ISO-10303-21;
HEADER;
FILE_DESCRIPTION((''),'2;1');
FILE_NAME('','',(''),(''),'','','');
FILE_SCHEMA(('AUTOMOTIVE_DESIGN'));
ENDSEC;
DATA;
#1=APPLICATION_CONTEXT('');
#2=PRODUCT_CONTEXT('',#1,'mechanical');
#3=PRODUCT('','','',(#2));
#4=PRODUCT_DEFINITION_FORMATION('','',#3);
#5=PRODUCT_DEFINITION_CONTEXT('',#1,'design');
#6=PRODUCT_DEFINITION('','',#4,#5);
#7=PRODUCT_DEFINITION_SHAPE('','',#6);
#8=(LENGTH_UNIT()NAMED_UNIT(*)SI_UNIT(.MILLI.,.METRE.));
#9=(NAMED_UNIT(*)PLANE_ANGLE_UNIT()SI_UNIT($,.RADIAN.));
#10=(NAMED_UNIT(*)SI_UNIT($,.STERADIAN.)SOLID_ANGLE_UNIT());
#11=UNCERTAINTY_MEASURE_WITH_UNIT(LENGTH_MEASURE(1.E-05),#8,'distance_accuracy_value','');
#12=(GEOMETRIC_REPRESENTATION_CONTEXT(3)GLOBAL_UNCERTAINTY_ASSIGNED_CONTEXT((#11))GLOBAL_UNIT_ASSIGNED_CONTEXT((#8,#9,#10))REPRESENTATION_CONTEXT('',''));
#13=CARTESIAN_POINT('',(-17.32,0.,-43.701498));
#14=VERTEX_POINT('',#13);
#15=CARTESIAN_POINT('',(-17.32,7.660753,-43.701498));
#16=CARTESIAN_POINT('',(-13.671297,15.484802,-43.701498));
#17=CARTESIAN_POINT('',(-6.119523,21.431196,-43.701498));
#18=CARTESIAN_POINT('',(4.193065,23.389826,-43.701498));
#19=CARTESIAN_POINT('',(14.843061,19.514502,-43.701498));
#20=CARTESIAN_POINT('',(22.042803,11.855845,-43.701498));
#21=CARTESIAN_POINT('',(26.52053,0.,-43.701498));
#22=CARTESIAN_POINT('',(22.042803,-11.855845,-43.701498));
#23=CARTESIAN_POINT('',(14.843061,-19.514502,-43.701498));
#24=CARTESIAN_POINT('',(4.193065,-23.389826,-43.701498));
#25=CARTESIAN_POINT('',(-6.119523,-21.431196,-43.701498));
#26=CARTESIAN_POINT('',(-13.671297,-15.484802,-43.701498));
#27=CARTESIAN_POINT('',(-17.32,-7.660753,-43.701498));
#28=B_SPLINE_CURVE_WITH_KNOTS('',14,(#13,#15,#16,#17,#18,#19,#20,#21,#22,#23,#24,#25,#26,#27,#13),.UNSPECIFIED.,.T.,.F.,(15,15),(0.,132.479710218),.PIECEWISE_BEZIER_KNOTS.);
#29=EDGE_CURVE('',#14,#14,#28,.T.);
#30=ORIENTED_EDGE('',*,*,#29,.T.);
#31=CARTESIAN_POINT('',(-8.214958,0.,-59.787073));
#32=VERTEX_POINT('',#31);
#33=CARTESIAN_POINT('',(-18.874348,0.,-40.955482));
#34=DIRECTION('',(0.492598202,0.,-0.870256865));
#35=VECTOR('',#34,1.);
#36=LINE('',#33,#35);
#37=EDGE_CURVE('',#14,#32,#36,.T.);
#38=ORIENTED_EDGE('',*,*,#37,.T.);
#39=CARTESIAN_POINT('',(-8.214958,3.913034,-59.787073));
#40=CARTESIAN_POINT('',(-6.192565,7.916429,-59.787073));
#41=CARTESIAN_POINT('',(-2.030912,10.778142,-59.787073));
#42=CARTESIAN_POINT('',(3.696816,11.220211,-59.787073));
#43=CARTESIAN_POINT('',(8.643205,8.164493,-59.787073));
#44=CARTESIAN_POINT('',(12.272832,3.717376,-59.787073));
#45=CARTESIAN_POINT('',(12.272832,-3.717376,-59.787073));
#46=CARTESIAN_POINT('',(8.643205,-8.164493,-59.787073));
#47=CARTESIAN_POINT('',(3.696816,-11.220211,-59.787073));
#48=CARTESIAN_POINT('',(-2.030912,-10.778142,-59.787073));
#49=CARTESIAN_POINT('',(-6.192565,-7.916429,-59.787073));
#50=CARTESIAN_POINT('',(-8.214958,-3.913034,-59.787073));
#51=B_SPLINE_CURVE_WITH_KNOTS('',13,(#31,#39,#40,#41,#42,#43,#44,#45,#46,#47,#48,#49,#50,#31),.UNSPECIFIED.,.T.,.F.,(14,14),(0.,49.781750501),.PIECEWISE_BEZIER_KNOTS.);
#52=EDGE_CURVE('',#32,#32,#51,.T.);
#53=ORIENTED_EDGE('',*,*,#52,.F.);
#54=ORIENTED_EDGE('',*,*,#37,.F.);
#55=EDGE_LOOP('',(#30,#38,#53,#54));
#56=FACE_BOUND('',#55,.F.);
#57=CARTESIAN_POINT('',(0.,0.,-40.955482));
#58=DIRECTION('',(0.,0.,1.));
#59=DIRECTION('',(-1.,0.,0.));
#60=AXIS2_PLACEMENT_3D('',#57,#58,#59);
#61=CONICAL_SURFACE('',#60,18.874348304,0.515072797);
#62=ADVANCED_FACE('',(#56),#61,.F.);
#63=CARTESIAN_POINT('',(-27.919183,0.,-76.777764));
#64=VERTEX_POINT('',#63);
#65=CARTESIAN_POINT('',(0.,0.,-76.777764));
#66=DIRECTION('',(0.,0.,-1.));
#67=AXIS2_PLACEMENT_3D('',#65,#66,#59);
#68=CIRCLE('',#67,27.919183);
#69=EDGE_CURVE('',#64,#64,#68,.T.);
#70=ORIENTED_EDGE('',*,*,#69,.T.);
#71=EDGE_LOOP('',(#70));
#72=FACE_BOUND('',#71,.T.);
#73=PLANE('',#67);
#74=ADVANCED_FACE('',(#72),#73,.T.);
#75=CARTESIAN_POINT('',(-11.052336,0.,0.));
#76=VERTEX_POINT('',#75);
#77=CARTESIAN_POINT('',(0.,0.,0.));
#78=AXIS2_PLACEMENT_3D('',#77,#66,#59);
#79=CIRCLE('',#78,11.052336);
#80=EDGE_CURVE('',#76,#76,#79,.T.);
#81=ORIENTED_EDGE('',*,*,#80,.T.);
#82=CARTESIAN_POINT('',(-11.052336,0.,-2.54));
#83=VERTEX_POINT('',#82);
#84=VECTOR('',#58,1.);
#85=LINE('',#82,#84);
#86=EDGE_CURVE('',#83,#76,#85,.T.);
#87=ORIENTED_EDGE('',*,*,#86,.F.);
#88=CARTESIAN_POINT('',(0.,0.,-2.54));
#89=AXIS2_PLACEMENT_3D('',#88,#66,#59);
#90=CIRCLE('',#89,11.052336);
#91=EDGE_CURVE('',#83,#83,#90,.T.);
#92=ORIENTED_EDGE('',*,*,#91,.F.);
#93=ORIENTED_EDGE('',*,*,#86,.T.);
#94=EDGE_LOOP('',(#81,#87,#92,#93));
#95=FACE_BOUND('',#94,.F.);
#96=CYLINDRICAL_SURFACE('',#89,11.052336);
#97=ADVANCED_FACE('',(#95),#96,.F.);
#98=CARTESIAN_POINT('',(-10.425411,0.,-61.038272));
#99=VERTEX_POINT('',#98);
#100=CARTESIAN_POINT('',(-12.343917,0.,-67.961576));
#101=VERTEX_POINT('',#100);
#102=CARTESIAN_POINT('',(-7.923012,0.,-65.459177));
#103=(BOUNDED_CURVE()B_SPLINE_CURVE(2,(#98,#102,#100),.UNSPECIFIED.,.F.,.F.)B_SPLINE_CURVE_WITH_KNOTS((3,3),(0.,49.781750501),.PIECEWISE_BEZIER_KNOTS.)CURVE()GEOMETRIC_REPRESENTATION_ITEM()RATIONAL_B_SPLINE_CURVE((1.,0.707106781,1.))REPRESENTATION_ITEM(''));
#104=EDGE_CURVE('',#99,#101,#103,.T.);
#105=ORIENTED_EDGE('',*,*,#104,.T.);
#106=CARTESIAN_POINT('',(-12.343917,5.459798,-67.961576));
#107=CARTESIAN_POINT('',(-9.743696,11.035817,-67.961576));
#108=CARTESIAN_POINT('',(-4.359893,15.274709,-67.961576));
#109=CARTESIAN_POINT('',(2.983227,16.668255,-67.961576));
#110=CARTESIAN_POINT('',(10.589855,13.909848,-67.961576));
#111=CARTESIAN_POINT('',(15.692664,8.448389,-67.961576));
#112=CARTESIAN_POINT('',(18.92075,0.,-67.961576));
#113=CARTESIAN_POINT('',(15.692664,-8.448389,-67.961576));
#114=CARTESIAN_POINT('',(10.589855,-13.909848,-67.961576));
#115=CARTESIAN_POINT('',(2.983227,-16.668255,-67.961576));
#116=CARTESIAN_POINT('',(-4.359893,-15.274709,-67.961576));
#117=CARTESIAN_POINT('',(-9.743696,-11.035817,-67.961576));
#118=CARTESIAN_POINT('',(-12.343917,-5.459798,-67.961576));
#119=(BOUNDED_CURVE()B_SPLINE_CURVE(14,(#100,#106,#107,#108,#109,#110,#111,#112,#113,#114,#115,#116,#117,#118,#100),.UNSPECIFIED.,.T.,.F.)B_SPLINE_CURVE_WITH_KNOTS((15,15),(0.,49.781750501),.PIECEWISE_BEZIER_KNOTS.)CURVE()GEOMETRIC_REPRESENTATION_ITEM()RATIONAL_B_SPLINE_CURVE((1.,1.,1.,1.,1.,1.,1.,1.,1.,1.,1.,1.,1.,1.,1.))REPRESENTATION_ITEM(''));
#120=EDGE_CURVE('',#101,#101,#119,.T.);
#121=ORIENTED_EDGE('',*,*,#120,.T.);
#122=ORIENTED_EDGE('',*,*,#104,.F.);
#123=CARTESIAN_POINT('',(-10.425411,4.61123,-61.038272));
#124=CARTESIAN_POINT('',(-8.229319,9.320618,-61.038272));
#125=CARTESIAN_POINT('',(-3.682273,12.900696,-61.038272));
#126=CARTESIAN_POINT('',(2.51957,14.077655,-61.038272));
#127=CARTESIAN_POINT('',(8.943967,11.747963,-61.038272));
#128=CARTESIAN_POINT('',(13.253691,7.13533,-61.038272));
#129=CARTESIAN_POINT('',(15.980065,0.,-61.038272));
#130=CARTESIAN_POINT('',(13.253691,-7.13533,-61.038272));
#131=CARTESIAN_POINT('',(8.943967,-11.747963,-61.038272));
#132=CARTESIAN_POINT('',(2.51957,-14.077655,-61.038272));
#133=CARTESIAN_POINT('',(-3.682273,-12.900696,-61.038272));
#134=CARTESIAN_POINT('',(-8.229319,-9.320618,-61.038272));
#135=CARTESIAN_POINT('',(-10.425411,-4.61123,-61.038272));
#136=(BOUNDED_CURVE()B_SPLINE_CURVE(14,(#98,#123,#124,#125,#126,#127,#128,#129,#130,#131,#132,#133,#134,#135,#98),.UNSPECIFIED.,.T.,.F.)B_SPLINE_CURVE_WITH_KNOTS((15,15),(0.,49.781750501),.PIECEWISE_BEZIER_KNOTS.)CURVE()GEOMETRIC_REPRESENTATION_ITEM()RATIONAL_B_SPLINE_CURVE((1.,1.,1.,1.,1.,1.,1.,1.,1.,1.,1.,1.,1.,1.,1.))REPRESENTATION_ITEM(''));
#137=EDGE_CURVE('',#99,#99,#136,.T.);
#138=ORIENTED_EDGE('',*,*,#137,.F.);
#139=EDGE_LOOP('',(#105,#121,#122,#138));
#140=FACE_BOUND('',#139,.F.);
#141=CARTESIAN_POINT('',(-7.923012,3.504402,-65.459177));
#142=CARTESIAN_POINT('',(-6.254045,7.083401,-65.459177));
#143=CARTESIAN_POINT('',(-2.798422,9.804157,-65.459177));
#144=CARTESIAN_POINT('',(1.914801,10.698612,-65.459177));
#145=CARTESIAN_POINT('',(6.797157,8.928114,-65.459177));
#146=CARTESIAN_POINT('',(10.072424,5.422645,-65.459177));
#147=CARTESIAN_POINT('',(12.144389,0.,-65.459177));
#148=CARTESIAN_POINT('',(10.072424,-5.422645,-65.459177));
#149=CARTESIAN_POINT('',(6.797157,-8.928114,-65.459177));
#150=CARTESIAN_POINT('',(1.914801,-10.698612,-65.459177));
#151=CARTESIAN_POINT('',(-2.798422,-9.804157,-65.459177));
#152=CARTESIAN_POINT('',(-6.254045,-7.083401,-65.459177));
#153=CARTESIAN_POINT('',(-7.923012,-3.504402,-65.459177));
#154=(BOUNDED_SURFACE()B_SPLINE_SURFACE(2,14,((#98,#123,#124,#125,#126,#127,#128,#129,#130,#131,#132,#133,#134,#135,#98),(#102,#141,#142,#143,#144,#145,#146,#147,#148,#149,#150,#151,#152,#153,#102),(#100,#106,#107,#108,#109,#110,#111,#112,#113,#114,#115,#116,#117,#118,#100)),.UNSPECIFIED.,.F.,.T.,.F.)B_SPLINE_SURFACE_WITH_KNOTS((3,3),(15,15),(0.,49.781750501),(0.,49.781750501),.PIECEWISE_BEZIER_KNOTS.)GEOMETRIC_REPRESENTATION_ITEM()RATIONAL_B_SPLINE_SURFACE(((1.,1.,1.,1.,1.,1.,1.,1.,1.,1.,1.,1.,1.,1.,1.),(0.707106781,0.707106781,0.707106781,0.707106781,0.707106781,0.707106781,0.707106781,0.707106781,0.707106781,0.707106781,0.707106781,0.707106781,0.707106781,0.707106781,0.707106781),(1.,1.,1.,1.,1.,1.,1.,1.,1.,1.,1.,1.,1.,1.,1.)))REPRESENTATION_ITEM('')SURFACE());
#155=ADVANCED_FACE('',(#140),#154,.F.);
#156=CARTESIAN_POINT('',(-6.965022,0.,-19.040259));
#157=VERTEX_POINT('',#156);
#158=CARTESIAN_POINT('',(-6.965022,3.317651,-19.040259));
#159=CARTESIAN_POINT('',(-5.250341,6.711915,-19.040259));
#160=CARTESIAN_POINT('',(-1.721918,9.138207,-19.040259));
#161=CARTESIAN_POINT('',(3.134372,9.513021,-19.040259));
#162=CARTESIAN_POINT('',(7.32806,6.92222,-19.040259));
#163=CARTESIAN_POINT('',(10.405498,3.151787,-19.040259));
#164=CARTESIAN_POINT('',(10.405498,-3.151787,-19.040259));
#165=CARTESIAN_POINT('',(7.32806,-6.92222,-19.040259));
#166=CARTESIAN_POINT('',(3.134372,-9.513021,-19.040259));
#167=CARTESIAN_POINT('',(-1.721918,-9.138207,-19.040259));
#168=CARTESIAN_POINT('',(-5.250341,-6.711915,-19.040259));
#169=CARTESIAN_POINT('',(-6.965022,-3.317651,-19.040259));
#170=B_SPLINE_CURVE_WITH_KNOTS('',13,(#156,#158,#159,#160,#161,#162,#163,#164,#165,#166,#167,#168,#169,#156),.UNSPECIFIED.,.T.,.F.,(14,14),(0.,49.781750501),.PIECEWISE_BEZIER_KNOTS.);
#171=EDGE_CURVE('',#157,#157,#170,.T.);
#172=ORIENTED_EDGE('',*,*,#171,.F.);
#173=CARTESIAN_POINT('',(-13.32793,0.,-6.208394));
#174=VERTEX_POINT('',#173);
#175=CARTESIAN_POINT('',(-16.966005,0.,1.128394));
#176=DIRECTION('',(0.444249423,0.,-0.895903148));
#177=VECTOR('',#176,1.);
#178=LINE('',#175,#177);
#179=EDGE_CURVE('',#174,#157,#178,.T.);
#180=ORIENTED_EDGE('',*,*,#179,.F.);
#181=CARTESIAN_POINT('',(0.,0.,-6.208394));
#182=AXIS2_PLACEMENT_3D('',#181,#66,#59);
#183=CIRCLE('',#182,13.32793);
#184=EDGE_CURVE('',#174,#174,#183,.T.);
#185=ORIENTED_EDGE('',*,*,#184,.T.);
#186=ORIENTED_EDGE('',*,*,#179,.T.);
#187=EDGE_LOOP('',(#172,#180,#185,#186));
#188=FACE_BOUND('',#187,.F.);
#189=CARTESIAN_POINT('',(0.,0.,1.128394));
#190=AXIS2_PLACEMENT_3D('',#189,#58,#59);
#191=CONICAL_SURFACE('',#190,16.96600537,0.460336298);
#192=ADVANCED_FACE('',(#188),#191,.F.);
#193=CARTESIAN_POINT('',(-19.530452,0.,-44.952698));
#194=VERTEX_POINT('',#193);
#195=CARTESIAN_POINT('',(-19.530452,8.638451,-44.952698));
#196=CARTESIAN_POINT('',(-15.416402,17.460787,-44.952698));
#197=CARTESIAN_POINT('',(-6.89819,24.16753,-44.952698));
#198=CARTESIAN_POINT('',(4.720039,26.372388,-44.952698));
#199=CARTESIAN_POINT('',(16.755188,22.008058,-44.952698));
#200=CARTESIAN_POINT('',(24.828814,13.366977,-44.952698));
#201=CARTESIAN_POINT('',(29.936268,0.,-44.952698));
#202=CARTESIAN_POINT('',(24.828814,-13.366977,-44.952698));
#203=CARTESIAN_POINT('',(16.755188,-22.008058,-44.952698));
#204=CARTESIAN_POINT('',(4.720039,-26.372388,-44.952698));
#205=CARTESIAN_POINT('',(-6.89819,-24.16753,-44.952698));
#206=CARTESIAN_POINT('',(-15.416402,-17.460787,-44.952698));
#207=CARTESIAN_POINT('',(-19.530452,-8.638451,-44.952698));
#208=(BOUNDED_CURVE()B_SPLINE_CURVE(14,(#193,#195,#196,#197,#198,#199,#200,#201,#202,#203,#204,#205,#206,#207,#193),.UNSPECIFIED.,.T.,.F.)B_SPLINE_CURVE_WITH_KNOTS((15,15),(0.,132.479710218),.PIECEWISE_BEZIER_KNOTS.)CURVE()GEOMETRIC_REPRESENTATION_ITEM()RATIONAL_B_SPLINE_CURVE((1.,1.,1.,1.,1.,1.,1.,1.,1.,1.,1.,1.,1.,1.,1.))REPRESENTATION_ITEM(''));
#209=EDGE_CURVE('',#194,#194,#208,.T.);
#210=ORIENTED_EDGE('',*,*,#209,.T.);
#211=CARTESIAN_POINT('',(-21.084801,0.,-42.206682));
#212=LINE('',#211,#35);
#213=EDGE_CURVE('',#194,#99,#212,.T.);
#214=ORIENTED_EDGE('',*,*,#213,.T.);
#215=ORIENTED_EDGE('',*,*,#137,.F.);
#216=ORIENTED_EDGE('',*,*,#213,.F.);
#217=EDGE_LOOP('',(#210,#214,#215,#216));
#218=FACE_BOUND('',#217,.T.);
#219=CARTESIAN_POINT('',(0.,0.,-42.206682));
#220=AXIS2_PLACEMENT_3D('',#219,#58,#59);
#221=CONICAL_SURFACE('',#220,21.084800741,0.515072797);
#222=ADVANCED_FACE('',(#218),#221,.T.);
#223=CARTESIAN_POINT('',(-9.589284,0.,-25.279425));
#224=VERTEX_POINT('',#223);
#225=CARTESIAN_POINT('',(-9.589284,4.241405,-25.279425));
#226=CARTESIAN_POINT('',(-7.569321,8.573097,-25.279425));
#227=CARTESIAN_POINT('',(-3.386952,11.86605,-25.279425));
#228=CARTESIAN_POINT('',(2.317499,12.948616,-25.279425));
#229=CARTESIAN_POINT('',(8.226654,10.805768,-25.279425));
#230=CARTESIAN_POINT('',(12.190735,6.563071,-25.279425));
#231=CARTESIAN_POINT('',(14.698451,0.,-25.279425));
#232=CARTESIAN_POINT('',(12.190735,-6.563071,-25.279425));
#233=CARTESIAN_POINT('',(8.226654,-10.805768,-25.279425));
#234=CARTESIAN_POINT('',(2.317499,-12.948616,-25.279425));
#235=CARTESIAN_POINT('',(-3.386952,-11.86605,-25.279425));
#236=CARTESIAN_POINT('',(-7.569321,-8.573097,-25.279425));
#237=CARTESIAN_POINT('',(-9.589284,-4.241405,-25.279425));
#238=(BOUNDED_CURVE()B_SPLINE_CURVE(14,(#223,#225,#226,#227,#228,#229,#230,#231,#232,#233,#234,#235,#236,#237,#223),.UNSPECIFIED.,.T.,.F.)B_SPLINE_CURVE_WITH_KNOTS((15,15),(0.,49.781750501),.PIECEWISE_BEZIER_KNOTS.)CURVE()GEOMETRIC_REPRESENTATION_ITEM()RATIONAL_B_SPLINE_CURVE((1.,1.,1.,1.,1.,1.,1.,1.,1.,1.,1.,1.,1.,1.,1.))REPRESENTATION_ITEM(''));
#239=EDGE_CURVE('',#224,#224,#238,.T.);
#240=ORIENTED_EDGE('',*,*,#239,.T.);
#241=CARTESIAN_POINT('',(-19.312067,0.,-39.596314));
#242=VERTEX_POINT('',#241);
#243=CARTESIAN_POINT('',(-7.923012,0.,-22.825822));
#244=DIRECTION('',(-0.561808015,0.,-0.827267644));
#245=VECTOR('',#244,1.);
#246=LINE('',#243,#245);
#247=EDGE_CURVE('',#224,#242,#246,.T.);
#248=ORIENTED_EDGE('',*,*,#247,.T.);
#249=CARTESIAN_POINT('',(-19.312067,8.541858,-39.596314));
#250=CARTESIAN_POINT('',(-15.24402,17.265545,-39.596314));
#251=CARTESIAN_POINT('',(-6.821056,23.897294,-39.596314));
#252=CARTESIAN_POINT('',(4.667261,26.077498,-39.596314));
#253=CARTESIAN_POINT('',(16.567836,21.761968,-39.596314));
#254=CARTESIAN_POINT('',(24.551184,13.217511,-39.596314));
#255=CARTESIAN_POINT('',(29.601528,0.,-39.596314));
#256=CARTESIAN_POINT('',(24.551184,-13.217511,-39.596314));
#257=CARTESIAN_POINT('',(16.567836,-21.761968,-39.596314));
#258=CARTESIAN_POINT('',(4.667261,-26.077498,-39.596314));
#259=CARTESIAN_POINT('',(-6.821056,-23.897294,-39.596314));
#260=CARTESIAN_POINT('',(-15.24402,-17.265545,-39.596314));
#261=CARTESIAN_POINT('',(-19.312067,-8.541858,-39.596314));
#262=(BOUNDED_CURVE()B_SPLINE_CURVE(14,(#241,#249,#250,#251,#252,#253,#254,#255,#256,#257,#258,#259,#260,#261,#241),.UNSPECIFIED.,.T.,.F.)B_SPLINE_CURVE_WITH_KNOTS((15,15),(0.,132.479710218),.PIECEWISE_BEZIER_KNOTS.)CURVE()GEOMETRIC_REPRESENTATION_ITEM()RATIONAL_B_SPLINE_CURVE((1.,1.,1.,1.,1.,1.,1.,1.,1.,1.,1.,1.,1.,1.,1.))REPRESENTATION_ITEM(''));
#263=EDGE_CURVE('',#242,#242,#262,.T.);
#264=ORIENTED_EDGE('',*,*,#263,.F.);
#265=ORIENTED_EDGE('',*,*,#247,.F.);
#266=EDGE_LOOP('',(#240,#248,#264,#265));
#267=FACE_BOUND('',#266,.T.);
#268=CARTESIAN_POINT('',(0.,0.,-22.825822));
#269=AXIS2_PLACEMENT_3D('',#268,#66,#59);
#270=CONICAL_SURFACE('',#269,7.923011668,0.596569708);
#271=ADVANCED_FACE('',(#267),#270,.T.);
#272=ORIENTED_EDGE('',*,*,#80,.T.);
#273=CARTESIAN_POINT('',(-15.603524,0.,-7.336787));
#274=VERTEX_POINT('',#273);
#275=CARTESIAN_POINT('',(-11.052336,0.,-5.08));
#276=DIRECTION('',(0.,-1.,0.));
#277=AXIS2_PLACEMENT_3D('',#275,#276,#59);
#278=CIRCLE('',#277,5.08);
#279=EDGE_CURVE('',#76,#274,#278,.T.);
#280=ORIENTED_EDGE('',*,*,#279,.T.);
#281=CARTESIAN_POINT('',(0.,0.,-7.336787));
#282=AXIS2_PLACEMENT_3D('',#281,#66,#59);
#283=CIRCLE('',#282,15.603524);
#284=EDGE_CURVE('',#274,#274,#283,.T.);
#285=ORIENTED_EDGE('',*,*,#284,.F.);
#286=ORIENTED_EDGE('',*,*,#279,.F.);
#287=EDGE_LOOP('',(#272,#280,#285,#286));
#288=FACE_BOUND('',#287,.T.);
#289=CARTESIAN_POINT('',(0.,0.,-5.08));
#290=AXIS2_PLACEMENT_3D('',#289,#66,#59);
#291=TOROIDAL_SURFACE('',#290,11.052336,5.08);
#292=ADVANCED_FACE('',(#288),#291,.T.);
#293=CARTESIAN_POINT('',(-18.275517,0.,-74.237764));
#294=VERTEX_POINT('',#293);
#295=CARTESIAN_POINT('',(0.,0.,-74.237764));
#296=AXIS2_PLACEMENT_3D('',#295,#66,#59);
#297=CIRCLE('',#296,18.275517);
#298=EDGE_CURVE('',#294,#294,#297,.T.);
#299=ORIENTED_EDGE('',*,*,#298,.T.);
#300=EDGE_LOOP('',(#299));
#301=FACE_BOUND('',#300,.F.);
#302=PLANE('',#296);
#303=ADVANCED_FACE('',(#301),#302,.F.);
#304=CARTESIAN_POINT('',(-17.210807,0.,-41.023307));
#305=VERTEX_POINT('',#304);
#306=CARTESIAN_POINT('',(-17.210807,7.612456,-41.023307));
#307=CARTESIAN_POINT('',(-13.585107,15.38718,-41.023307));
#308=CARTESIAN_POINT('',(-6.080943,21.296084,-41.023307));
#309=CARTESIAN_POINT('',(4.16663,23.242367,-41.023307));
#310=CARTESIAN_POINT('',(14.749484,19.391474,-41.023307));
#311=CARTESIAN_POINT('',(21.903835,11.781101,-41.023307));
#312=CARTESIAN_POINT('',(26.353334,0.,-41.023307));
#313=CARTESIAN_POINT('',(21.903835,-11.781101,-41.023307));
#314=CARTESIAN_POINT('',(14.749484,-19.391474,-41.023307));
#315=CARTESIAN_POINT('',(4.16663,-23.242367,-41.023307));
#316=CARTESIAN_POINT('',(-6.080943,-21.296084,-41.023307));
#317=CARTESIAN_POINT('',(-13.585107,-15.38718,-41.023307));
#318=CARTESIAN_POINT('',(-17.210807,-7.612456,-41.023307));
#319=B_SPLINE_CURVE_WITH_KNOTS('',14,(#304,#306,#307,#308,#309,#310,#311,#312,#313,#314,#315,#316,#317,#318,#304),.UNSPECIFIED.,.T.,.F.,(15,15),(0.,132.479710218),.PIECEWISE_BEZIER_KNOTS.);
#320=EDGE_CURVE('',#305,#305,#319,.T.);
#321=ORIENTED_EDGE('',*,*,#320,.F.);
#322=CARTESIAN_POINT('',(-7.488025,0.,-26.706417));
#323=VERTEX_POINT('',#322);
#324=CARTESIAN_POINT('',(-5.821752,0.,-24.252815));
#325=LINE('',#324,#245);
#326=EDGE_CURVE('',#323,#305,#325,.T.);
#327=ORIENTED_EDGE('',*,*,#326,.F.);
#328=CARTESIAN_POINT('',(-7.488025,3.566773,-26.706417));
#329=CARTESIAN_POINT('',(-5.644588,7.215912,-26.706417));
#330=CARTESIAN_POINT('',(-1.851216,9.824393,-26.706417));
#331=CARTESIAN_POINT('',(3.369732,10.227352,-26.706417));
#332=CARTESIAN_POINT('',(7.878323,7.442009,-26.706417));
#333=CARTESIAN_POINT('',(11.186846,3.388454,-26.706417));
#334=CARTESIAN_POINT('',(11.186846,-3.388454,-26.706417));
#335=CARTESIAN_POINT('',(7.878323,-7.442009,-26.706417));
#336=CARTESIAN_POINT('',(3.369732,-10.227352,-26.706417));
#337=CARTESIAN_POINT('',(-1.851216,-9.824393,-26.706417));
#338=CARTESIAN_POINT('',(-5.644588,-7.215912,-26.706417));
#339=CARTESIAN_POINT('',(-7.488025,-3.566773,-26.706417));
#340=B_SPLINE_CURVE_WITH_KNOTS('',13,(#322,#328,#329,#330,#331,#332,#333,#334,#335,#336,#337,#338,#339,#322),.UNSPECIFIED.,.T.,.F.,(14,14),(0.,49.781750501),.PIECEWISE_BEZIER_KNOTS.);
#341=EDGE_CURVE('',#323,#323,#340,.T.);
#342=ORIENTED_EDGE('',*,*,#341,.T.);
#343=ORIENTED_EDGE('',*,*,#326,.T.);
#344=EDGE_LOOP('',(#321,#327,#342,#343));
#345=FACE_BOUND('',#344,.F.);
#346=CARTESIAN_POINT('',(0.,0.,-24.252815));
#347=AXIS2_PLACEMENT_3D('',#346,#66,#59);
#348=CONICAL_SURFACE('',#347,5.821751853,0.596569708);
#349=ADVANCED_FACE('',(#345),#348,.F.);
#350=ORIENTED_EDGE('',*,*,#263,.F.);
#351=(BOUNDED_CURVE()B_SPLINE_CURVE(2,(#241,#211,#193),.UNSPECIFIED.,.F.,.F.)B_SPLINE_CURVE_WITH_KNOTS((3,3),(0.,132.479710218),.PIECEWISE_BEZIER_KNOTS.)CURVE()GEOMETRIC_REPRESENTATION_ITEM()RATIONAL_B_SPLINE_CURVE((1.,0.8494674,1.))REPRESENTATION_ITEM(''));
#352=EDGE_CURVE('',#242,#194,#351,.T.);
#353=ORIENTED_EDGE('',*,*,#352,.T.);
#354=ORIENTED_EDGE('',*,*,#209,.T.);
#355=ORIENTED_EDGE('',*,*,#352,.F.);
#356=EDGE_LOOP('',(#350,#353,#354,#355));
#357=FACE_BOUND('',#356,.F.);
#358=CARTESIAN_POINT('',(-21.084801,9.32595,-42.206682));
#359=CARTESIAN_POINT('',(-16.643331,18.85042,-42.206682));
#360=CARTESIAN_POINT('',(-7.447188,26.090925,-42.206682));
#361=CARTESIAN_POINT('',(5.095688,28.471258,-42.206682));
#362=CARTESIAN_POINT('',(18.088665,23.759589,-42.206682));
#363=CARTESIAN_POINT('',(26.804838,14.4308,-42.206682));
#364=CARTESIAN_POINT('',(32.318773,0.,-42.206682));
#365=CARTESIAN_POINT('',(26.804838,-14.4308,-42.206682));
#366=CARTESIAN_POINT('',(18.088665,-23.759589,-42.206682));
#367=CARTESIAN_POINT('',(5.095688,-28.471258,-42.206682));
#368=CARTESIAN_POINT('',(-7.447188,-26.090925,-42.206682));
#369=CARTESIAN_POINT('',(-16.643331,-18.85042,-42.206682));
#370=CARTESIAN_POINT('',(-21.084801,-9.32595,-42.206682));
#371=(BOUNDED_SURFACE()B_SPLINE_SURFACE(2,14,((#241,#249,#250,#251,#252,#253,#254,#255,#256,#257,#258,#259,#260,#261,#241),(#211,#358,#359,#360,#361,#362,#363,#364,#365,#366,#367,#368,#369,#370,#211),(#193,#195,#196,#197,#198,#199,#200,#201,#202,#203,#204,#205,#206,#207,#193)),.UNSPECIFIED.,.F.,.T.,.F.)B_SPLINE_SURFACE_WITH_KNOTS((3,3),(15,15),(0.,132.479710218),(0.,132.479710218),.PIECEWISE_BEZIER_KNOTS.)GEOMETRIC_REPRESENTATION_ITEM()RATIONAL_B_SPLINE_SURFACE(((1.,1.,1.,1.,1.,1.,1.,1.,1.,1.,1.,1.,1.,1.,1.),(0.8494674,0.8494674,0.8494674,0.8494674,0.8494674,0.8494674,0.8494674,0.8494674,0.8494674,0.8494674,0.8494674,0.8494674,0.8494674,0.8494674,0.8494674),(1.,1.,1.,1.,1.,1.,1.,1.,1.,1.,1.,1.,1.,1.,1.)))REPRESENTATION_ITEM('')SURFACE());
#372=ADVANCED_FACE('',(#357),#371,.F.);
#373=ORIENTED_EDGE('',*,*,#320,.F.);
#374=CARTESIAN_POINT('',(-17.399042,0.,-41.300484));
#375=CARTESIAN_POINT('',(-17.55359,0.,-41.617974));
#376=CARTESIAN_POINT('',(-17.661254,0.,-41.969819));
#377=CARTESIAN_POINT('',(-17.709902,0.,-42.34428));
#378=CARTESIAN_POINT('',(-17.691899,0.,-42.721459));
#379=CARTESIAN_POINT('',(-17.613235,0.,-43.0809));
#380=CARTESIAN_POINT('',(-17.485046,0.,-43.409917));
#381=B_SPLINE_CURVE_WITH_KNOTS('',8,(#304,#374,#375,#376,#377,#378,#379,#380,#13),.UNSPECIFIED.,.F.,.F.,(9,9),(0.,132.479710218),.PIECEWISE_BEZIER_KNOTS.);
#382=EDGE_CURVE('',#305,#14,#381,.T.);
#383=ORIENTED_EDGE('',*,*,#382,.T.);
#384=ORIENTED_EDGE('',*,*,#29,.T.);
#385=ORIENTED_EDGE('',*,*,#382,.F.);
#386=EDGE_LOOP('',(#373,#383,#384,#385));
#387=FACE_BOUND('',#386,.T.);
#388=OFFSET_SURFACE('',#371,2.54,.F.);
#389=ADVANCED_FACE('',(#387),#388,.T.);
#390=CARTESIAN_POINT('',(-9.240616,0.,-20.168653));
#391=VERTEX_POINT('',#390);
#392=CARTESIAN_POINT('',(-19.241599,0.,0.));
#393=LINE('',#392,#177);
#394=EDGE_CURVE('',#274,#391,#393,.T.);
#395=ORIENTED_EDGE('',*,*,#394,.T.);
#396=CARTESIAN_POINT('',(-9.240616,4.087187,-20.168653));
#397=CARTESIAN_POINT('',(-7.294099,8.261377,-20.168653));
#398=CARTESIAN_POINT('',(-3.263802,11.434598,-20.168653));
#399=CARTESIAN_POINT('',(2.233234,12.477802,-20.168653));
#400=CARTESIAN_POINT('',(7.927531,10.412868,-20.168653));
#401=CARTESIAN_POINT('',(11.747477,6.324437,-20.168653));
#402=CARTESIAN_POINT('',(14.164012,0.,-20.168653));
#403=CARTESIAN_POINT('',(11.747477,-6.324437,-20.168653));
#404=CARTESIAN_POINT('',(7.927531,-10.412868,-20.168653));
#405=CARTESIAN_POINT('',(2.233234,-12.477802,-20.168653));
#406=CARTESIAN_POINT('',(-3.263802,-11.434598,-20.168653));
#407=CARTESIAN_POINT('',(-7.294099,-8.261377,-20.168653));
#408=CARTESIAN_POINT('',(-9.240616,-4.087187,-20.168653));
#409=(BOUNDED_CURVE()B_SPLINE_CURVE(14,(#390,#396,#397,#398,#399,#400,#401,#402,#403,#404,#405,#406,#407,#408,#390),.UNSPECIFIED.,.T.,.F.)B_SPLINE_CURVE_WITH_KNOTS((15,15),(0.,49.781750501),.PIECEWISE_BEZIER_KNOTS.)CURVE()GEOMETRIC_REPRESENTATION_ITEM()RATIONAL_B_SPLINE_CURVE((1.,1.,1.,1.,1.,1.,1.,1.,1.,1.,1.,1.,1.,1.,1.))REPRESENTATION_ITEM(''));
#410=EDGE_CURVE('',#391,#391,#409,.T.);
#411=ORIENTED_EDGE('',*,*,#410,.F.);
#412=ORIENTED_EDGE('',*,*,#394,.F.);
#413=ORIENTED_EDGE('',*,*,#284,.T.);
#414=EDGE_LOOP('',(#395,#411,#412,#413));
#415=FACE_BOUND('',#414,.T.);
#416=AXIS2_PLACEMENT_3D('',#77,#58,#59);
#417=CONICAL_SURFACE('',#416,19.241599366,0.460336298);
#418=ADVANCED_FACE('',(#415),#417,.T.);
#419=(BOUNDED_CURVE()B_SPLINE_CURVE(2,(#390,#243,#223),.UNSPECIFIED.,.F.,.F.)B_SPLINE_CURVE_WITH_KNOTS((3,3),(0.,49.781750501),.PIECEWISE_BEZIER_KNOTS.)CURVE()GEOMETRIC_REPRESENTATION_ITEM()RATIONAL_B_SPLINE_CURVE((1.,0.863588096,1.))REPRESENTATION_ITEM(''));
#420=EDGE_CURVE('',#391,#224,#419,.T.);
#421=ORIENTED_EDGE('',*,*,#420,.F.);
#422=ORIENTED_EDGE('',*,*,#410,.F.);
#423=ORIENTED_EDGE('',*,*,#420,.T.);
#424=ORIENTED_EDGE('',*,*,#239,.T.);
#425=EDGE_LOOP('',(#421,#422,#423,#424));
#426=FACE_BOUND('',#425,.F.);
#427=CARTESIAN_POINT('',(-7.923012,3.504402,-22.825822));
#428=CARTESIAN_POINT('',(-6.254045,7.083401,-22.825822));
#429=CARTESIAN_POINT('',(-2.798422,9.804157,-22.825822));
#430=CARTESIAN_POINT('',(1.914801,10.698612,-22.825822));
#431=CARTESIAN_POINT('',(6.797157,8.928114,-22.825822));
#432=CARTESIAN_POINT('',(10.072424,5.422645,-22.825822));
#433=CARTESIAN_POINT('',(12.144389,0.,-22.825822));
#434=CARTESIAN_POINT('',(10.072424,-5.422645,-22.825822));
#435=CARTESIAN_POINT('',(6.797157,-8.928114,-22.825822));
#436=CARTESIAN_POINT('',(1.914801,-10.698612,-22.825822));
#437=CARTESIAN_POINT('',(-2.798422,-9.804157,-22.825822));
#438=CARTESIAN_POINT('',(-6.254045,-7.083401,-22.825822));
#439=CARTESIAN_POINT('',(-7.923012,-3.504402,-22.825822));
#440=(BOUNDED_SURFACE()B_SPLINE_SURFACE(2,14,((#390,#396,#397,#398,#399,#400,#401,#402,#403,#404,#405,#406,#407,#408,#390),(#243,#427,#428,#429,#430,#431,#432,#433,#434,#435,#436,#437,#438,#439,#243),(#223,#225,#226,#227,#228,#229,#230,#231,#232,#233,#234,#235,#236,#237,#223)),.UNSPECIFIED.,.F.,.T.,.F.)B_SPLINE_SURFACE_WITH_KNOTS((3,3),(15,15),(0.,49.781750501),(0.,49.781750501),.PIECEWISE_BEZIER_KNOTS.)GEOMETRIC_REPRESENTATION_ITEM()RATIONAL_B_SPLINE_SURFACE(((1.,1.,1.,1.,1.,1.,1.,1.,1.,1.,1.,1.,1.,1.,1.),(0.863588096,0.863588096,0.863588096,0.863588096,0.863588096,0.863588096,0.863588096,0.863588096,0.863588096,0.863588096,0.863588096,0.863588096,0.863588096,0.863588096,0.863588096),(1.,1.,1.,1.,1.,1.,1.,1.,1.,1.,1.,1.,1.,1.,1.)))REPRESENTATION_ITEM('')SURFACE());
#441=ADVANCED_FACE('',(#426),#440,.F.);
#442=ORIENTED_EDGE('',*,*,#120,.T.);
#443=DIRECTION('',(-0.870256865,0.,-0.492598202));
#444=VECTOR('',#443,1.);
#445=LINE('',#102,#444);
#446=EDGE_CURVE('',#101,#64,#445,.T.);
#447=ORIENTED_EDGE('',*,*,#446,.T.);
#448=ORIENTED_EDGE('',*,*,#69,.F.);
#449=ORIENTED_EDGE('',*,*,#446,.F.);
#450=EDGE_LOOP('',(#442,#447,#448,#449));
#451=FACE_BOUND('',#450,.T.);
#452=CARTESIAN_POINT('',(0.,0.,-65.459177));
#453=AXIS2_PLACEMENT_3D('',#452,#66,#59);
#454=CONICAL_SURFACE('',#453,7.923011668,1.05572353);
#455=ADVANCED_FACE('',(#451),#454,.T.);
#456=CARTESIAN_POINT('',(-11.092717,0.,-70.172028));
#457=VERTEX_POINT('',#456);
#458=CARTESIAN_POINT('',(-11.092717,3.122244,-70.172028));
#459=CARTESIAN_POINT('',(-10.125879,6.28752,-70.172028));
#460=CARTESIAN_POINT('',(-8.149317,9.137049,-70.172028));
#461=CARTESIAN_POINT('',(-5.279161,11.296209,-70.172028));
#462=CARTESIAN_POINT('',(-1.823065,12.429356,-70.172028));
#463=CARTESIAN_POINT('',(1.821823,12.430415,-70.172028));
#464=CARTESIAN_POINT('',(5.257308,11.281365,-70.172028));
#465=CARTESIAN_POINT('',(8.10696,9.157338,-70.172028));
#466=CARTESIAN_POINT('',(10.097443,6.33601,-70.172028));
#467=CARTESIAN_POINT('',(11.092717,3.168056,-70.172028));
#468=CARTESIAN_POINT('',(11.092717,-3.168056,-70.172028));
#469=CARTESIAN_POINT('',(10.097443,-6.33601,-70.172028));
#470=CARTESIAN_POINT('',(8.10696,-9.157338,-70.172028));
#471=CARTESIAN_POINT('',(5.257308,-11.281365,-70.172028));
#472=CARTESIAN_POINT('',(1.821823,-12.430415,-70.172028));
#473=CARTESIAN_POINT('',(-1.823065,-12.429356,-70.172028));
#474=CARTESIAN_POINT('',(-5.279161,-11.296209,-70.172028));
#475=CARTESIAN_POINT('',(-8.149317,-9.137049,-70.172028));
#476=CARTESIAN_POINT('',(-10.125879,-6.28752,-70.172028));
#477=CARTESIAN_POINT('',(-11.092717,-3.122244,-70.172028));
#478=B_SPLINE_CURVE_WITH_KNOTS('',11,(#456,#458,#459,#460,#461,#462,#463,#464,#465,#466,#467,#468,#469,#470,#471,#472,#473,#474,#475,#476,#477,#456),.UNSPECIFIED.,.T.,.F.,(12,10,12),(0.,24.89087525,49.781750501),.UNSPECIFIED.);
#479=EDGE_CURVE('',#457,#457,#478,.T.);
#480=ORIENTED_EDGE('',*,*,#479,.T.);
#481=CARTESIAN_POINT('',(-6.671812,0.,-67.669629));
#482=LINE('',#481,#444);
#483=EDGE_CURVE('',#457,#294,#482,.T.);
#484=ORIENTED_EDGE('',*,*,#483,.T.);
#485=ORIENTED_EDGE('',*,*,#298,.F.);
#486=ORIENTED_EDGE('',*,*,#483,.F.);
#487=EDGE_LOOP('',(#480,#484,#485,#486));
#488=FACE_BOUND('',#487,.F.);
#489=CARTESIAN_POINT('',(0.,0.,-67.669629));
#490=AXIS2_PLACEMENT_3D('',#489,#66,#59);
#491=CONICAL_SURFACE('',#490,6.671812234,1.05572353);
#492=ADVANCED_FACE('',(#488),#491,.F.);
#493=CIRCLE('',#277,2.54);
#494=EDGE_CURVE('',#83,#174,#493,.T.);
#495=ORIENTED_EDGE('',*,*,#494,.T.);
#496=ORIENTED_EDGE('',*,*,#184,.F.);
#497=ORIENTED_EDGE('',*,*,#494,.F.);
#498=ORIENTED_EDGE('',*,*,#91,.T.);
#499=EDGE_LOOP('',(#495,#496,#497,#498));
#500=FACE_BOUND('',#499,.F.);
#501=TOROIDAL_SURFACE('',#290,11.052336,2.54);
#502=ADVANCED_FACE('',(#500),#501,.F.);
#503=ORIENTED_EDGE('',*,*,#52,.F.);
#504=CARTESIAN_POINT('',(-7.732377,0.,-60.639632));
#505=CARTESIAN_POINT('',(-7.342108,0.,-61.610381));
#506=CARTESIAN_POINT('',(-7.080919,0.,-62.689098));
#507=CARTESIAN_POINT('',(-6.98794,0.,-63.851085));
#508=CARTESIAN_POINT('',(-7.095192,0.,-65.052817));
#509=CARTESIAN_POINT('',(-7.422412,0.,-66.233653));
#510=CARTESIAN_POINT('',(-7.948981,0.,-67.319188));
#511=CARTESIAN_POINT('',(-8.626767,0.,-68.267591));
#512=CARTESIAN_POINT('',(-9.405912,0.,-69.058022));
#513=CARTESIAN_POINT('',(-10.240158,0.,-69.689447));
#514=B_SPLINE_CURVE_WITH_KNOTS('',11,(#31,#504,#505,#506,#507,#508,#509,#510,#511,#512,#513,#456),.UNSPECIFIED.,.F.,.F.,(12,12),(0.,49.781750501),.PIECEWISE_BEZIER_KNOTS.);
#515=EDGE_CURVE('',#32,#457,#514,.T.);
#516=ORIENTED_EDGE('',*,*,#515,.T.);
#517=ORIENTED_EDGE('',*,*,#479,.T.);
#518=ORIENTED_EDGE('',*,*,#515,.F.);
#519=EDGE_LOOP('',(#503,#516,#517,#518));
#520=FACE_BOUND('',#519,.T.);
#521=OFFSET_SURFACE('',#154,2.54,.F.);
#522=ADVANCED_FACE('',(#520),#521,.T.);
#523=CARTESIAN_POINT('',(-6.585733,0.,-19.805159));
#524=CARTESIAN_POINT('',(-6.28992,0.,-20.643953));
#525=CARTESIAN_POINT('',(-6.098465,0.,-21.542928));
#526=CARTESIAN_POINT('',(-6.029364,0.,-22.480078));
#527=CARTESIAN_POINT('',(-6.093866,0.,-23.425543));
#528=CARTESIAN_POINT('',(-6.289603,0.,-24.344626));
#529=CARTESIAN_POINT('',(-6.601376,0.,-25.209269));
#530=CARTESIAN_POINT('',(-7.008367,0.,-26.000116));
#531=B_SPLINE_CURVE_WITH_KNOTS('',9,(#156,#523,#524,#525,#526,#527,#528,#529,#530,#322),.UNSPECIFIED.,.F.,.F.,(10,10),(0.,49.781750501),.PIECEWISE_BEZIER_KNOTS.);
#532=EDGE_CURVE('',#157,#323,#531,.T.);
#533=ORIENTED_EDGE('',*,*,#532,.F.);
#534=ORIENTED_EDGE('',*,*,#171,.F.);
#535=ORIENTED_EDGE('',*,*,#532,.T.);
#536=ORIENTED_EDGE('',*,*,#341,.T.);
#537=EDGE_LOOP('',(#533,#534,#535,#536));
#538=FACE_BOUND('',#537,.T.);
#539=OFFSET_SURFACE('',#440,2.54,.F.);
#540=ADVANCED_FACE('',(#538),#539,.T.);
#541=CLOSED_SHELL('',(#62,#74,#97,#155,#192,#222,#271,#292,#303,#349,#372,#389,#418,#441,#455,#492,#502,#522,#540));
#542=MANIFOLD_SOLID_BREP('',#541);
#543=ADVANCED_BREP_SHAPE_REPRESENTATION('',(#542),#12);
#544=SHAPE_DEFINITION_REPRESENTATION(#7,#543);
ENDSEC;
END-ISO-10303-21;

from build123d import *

# Parameters (mm, degrees)
F2_R = 5.08
F3_T = -2.54


# Not quite as in the source:
# - a shell that OpenCascade refuses in one call is made with other operations: the cavity is built on its own and cut out


with BuildPart() as f1:
    # F0 (on Front) → F1 (revolve)
    with BuildSketch(Plane.XZ):
        Polygon((-27.9191825539, -76.7777636647), (0, -76.7777636647), (0, 0), (-19.2415993661, 0), (-7.923011668, -22.8258222342), (-21.0848007405, -42.2066817869), (-7.923011668, -65.459176898), align=None)
    revolve(axis=Axis((0, 0, -38.3888818324), (0, 0, -1)))

    # F2
    f2_edges = [f1.edges().sort_by_distance(p)[0] for p in [
        (21.084801, 0, -42.206682),
        (7.923012, 0, -22.825822),
        (19.241599, 0, 0),
        (-13.582306, 0, -11.412911),
        (7.923012, 0, -65.459177),
    ]]
    fillet(f2_edges, radius=F2_R)

    # F3: a shell. OpenCascade refuses it in one call, so the cavity is built on its own and cut out:
    # the body offset inwards by the wall thickness, plus a prism from it out through each open face.
    f3_core = offset(f1.part, amount=F3_T, mode=Mode.PRIVATE)
    f3_exits = [f3_core.faces().sort_by_distance(p)[0] for p in [
        (0, 0, -2.54),
    ]]
    add(f3_core, mode=Mode.SUBTRACT)
    extrude(f3_exits, amount=-F3_T, mode=Mode.SUBTRACT)


solid = f1.part
